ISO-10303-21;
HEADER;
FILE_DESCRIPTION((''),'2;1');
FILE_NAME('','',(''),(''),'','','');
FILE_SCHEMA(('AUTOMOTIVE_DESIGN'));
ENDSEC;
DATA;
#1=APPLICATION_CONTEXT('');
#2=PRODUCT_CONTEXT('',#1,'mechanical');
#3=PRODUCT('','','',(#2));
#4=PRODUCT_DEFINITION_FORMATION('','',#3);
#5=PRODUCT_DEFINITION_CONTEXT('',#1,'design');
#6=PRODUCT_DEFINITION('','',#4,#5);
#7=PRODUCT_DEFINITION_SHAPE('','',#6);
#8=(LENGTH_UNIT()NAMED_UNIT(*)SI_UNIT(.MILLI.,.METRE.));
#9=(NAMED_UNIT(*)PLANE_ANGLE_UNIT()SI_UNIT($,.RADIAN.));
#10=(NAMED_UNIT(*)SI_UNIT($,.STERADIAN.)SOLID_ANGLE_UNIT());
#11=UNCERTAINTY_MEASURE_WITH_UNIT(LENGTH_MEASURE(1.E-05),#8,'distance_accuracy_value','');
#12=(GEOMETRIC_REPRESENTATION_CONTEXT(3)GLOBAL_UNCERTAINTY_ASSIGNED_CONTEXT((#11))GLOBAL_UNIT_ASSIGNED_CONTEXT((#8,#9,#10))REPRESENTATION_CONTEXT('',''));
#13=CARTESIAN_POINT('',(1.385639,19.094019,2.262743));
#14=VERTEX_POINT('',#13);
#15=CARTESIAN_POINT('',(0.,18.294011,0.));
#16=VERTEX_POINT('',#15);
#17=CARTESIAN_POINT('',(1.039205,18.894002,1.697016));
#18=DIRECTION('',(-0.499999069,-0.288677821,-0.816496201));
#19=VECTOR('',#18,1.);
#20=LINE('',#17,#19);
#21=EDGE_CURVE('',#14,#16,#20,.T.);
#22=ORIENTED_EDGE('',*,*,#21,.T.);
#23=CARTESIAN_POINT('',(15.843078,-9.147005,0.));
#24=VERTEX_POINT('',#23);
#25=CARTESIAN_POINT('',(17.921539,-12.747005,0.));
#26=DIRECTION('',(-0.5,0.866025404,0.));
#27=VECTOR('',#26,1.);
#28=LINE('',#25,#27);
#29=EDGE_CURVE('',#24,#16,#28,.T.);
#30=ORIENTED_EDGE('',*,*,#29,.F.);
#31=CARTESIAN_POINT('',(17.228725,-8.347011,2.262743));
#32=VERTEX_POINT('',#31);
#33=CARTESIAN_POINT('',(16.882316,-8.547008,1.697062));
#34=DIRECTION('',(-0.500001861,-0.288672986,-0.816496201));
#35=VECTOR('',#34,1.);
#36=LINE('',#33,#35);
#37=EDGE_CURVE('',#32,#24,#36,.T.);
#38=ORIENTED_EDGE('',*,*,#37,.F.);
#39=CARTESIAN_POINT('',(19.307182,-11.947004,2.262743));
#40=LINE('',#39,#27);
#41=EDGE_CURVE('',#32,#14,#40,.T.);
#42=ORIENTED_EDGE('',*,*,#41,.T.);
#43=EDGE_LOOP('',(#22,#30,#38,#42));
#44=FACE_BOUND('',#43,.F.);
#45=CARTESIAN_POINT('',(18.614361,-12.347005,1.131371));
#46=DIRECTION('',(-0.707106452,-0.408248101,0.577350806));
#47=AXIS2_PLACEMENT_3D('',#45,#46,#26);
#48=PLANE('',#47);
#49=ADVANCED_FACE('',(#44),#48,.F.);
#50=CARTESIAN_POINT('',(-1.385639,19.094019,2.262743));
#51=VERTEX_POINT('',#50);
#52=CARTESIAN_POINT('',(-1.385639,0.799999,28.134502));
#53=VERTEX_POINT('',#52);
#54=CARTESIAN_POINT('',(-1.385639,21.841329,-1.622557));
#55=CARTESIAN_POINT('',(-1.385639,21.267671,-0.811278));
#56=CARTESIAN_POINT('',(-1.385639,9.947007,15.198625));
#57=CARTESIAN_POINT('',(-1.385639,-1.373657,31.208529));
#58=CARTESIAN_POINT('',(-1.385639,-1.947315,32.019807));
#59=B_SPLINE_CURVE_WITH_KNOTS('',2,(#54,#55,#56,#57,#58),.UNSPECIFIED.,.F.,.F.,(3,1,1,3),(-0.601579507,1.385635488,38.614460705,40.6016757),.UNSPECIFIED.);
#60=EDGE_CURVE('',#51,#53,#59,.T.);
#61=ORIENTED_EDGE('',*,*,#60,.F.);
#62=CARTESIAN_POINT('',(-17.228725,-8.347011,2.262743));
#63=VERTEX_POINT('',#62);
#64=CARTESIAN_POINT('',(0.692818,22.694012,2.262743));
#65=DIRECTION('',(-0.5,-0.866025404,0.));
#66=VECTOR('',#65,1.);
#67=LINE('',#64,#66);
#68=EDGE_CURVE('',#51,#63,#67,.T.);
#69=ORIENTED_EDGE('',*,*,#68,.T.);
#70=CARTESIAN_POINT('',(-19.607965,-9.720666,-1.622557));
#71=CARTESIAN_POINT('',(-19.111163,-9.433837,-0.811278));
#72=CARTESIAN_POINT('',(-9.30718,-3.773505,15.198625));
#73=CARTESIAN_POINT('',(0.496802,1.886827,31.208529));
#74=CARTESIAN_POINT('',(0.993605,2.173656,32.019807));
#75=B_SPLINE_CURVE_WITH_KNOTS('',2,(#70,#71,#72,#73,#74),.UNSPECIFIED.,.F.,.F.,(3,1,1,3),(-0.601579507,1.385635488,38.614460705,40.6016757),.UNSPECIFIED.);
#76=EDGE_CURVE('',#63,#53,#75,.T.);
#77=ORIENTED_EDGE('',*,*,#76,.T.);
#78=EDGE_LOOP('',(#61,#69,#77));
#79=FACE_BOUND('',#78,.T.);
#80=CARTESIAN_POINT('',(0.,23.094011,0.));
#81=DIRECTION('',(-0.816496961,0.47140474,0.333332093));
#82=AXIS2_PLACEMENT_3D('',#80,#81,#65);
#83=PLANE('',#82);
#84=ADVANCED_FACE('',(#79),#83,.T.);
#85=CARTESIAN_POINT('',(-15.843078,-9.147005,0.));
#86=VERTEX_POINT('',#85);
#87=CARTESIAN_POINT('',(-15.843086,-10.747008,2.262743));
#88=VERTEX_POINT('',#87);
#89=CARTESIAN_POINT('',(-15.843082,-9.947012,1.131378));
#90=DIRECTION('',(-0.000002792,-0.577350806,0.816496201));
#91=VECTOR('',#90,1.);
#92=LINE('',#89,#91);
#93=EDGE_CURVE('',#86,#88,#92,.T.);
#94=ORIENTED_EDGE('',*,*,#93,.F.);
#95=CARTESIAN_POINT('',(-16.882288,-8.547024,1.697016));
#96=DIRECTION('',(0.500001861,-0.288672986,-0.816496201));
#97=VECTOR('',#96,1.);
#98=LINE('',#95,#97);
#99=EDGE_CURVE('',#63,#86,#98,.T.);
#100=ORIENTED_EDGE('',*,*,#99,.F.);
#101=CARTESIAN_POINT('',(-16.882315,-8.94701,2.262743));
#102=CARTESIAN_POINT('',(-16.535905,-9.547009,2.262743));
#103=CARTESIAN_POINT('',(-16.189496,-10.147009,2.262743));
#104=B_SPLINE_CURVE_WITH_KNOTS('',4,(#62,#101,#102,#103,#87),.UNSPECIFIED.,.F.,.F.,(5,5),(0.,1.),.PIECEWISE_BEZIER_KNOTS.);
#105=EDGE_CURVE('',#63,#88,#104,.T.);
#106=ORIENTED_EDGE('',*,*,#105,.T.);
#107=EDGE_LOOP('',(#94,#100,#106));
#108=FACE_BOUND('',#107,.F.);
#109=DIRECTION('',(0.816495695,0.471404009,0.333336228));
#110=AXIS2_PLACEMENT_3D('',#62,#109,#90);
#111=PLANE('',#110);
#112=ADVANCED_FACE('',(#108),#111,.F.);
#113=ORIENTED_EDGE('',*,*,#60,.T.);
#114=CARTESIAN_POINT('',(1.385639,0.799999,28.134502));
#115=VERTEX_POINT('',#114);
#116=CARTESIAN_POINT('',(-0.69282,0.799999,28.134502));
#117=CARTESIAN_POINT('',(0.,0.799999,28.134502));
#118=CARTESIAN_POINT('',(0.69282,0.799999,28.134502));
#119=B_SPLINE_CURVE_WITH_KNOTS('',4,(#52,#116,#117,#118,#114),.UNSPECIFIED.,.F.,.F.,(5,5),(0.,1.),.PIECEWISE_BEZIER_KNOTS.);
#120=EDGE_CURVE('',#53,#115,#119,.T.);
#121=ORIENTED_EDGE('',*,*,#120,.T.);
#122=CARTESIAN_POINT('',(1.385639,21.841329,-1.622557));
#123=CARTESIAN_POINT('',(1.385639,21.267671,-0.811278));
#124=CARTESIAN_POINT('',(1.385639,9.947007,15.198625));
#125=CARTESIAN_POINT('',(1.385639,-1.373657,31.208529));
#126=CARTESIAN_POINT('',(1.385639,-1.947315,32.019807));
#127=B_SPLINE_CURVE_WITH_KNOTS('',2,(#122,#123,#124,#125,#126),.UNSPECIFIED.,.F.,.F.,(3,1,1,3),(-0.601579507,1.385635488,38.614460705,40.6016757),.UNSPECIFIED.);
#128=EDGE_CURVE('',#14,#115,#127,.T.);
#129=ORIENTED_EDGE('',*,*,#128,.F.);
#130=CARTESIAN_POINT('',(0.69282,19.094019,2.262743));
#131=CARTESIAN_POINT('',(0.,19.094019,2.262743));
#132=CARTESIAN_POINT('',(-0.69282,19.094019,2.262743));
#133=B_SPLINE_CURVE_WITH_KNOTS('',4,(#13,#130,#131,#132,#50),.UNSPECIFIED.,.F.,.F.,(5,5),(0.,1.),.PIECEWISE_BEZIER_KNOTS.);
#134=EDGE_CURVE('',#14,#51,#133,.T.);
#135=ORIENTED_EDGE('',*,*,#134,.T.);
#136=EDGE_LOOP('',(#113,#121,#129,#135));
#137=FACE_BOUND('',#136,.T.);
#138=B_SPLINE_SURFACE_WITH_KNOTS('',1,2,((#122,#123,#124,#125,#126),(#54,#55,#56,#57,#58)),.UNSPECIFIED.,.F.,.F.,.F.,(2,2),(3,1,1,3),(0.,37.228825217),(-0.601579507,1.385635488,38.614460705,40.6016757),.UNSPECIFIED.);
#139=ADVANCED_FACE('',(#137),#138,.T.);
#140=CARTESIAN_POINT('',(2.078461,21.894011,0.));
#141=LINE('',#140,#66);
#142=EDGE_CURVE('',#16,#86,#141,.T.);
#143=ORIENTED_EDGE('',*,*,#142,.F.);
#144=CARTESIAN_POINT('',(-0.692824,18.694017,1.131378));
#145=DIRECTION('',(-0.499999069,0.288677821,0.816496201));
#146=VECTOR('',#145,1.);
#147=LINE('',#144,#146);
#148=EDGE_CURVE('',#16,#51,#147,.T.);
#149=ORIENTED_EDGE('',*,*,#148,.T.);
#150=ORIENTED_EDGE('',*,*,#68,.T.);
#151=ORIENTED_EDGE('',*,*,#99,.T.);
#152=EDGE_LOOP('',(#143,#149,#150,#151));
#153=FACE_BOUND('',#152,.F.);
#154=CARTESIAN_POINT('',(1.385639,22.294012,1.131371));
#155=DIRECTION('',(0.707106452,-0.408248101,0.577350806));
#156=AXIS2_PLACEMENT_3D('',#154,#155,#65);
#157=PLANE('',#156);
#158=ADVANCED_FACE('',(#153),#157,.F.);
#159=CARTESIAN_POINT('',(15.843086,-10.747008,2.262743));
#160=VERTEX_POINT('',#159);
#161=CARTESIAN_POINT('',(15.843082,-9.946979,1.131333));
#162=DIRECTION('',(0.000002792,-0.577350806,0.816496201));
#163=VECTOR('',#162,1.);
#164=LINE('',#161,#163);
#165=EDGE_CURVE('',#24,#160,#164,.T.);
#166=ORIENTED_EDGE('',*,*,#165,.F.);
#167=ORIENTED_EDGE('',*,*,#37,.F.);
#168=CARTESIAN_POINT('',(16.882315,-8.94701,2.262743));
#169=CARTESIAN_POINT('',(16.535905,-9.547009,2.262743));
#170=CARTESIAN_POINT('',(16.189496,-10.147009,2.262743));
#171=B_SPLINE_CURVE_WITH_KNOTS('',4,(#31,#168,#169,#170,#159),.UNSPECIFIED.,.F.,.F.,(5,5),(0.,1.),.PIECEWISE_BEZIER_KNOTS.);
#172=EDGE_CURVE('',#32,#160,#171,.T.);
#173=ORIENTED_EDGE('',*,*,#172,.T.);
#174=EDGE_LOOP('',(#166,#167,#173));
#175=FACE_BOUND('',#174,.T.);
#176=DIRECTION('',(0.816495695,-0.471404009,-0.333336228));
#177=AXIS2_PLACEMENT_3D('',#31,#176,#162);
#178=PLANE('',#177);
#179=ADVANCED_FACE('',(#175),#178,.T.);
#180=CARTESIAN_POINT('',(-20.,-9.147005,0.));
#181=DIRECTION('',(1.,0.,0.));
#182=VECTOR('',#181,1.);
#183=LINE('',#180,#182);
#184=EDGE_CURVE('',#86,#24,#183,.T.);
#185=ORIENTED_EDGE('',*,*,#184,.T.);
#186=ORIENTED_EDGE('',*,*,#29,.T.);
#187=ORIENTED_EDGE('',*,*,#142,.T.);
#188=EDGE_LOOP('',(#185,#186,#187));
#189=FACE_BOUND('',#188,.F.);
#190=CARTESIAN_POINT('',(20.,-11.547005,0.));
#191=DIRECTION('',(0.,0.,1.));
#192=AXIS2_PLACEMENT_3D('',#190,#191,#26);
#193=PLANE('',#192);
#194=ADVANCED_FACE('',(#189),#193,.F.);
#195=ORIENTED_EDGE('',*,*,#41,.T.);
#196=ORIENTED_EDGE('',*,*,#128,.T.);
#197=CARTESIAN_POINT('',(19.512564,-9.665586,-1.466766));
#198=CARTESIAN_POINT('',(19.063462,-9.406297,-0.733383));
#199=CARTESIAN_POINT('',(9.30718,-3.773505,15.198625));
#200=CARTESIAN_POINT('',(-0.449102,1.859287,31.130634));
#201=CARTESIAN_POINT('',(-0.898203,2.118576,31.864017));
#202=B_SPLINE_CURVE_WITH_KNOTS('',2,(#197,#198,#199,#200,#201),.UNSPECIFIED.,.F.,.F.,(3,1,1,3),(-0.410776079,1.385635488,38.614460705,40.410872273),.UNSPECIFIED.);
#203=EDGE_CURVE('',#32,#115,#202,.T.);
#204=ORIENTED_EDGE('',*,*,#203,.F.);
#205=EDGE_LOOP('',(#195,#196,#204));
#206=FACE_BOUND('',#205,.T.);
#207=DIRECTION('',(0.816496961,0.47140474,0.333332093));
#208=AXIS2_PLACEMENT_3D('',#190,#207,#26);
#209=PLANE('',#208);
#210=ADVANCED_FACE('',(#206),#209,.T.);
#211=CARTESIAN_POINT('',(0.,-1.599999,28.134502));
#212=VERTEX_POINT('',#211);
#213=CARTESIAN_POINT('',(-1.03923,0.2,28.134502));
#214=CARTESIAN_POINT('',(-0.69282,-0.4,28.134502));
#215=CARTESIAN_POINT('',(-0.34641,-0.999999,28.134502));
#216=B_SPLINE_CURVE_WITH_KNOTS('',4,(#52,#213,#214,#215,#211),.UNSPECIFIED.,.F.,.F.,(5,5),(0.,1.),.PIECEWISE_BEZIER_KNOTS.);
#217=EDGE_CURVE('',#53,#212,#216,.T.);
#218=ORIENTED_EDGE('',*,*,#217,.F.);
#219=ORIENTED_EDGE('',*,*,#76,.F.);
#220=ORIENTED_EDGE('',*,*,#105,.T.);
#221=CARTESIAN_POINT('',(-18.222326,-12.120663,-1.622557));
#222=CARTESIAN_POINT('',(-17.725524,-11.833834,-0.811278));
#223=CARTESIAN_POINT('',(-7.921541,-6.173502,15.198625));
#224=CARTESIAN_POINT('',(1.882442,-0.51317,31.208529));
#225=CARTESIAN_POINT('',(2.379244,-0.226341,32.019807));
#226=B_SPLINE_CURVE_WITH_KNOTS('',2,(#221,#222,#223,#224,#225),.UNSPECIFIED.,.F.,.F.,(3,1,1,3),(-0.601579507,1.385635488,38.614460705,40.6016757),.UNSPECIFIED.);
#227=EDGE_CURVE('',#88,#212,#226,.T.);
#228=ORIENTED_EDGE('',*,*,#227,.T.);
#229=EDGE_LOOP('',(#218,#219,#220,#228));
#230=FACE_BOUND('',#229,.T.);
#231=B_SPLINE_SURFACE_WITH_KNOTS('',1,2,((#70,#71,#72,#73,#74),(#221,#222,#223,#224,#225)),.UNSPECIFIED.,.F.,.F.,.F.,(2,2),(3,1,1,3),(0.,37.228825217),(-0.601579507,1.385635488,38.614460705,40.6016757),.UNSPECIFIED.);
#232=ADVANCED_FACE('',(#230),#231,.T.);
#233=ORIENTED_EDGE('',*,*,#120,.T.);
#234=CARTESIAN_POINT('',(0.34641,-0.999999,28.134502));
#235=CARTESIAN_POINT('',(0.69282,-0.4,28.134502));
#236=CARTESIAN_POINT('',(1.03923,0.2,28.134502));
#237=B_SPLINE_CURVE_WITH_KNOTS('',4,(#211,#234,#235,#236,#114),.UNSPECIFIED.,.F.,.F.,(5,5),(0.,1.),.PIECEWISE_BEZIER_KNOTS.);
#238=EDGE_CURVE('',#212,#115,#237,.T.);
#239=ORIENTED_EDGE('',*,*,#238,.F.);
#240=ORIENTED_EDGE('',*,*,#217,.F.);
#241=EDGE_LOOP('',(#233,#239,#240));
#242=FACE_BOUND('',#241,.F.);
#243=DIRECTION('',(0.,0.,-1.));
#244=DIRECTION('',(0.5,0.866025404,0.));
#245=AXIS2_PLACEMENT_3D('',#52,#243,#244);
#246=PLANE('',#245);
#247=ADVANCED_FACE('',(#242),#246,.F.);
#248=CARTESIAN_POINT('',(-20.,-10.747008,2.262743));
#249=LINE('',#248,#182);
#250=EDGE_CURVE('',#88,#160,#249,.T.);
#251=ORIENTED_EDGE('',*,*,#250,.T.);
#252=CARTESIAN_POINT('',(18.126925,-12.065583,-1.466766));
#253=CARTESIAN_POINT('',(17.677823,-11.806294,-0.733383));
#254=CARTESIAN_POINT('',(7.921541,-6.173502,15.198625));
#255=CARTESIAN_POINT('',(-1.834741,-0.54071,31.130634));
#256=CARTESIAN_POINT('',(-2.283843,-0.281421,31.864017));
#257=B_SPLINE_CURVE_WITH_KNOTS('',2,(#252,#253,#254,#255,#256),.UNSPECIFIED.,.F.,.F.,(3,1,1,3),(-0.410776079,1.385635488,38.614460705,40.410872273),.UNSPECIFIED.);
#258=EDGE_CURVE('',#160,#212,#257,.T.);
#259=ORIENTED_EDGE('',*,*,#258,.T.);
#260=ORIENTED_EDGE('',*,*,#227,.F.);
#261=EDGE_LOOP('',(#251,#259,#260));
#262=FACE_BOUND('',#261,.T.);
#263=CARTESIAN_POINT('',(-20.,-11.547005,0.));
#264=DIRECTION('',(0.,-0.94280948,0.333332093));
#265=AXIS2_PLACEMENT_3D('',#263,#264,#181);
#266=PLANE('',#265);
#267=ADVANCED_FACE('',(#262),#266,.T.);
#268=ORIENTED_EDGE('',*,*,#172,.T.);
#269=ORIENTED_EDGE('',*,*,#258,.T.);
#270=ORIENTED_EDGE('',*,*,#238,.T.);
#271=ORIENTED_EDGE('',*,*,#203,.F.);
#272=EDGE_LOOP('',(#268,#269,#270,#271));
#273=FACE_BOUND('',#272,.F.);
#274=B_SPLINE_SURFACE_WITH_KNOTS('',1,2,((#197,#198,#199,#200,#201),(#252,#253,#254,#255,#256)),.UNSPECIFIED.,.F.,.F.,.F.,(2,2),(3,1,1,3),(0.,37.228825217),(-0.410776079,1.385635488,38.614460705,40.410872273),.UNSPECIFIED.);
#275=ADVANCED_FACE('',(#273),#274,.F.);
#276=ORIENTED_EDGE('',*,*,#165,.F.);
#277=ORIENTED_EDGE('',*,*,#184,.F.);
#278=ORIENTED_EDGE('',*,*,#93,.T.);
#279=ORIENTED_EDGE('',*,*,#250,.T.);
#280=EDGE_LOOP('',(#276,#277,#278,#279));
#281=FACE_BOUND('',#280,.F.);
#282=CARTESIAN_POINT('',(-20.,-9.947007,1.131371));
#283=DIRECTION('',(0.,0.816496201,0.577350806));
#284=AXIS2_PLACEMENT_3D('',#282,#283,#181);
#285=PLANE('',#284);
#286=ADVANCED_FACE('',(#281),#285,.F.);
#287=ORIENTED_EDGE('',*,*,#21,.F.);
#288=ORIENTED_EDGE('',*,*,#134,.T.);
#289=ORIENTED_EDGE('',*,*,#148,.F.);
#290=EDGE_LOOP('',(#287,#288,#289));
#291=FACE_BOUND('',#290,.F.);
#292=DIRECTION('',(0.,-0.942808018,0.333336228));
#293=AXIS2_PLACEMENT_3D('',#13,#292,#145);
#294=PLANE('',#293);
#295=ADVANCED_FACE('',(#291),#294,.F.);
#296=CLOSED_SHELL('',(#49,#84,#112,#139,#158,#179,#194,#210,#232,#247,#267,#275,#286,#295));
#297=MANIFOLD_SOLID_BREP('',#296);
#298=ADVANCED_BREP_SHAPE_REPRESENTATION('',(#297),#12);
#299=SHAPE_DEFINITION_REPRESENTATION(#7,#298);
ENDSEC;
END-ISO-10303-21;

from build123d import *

# Parameters (mm, degrees)
F4_SIZE = 2.4


with BuildPart() as f3:
    # F0 (on Top) → F3 section 0
    with BuildSketch(Plane.XY, mode=Mode.PRIVATE) as f3_s0:
        Polygon((20, -11.5470053838), (0, 23.0940107676), (-20, -11.5470053838), align=None)
    loft([f3_s0.sketch, Vertex(0, 0, 32.66)])

    # F4
    f4_edges = [f3.edges().sort_by_distance(p)[0] for p in [
        (0, -11.547005, 0),
        (-10, 5.773503, 0),
        (10, 5.773503, 0),
        (10, -5.773503, 16.33),
        (-10, -5.773503, 16.33),
        (0, 11.547005, 16.33),
    ]]
    chamfer(f4_edges, length=F4_SIZE)


solid = f3.part
